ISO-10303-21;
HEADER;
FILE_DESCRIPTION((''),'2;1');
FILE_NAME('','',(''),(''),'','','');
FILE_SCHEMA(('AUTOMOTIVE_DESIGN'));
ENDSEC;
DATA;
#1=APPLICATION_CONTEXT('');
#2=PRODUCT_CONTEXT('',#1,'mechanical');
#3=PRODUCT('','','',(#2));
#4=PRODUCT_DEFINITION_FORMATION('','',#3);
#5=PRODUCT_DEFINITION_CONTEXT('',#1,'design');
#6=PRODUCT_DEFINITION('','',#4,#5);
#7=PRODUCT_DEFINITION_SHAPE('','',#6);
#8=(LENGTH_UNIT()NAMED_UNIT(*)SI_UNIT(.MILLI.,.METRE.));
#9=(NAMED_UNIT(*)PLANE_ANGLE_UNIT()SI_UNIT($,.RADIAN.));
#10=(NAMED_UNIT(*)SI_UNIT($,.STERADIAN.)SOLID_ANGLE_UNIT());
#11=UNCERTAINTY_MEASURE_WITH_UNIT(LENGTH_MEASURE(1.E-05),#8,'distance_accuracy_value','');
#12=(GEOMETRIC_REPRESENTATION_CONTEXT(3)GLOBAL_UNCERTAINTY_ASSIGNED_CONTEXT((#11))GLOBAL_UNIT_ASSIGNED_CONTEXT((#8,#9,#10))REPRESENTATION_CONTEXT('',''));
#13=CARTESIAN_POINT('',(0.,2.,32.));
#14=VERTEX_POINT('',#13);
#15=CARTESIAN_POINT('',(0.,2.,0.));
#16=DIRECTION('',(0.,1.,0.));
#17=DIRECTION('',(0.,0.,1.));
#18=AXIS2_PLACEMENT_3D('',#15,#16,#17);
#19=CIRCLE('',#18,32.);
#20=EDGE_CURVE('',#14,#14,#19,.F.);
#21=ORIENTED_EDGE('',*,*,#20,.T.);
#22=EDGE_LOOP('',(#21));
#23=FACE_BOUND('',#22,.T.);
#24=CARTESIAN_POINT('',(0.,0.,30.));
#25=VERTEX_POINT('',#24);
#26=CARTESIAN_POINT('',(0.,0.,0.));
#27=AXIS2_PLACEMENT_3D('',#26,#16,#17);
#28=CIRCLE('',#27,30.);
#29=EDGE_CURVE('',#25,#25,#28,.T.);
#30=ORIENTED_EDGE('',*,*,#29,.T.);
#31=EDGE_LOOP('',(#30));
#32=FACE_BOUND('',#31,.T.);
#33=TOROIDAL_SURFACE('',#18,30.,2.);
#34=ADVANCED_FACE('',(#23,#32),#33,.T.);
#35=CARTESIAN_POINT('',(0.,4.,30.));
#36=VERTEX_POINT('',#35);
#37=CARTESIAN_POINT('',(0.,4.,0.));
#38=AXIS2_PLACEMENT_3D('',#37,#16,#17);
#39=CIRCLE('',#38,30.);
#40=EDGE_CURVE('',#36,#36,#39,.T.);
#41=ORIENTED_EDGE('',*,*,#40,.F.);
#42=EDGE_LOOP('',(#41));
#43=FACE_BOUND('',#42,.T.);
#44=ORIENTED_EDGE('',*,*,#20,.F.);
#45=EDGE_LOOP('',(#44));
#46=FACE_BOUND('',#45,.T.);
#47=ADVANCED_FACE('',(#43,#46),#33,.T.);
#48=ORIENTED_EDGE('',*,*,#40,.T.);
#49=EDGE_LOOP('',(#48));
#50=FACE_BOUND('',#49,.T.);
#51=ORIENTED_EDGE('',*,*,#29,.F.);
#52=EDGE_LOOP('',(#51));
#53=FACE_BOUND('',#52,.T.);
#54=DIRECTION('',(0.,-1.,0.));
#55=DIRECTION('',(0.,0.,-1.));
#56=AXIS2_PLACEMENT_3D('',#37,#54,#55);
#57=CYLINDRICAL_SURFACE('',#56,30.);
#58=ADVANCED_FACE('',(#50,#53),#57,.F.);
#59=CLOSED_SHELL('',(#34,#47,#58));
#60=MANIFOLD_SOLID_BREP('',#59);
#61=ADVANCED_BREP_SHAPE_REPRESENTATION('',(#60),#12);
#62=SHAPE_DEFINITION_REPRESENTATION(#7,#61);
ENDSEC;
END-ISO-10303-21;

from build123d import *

# Parameters (mm, degrees)
ESQUISSE1_R      = 32
ESQUISSE1_R_2    = 30
EXTRUSION1_DEPTH = 4
CONG_1_R         = 2


with BuildPart() as part:
    # Esquisse1 → Extrusion1 (new body)
    with BuildSketch(Plane(origin=(0, 0, 0), x_dir=(1, 0, 0), z_dir=(0, 1, 0))):
        with Locations(Location((0, 0, 0), (0, 0, 270))):
            Circle(ESQUISSE1_R)
        with Locations(Location((0, 0, 0), (0, 0, 270))):
            Circle(ESQUISSE1_R_2, mode=Mode.SUBTRACT)
    extrude(amount=EXTRUSION1_DEPTH)

    # Congé1
    cong_1_edges = [part.edges().sort_by_distance(p)[0] for p in [
        (0, 0, -32),
        (0, 4, -32),
    ]]
    fillet(cong_1_edges, radius=CONG_1_R - 0.0001)  # a hair under: the kernel refuses the full size


solid = part.part
